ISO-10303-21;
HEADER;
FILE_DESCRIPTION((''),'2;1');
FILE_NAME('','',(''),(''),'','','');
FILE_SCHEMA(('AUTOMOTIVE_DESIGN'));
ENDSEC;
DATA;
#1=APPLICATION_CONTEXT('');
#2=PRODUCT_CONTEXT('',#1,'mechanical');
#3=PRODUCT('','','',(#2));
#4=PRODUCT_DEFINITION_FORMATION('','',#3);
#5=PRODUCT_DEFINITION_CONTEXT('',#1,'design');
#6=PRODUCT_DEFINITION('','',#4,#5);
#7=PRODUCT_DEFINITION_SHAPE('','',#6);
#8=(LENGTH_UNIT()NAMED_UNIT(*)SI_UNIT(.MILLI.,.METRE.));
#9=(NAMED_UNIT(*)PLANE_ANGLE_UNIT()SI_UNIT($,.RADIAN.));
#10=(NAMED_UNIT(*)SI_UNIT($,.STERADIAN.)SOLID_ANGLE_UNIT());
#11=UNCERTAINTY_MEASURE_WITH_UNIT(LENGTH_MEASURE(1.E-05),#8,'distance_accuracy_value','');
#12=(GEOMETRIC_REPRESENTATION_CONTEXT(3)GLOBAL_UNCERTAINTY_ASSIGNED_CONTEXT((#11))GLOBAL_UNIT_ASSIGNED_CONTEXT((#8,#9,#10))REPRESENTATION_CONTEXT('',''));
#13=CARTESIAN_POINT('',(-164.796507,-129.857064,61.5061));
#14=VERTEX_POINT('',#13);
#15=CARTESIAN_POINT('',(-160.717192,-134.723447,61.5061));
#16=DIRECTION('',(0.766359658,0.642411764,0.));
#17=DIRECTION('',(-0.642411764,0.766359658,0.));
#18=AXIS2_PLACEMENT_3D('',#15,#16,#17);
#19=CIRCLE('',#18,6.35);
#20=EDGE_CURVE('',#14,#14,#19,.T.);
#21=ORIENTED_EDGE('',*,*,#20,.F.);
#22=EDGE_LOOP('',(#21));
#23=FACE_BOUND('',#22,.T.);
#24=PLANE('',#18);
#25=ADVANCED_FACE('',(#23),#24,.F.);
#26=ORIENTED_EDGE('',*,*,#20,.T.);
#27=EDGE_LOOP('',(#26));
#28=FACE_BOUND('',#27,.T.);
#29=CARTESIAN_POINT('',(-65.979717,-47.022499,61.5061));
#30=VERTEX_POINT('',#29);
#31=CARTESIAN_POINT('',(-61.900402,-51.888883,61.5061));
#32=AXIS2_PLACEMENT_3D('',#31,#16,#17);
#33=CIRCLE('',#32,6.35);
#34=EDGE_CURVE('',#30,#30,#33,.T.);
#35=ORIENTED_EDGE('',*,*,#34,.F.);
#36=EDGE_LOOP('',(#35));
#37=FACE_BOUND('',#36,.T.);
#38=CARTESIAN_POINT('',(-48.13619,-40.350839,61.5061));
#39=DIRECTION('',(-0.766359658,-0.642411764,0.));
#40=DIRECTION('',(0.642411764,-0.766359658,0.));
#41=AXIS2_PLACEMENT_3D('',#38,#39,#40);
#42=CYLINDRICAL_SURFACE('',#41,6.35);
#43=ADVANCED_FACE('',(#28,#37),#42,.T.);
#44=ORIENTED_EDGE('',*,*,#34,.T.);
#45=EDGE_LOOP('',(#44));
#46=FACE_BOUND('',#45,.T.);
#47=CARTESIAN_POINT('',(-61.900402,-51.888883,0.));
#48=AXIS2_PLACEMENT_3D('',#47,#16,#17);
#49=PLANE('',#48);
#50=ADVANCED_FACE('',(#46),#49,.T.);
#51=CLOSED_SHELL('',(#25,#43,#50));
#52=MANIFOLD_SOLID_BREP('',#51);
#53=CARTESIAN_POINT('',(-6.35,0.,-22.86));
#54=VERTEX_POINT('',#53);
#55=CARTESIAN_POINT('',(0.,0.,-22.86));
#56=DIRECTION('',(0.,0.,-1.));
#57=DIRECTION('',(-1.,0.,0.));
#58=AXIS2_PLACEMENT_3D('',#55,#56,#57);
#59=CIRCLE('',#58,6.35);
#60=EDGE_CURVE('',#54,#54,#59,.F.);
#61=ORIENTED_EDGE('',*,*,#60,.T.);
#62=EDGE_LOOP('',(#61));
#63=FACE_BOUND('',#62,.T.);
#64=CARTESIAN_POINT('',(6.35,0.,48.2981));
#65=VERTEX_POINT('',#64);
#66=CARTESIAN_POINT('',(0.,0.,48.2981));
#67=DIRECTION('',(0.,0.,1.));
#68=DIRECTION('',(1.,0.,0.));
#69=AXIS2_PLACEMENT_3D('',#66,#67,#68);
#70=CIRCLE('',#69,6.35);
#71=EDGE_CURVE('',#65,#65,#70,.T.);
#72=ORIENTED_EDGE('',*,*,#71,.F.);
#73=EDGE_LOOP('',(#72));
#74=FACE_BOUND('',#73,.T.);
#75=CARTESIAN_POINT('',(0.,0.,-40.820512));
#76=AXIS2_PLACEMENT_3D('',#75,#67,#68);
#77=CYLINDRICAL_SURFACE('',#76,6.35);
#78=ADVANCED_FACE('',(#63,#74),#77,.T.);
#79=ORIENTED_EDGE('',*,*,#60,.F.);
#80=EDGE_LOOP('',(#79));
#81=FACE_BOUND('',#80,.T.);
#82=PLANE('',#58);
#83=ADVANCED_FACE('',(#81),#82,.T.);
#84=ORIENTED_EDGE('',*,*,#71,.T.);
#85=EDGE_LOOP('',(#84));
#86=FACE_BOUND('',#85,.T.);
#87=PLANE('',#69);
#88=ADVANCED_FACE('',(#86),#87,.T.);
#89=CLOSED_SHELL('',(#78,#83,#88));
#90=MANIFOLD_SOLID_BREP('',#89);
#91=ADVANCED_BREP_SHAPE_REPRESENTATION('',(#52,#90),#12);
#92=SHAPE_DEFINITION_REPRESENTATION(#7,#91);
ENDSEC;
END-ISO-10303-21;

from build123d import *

# Parameters (mm, degrees)
BOSS_EXTRUDE1_OUTLINE_R = 6.35
BOSS_EXTRUDE1_DEPTH     = 128.9431
SKETCH3_R               = 6.35
BOSS_EXTRUDE2_DEPTH     = 71.1581


# Read off the part's stored shape, not the designer's step: Boss-Extrude1
with BuildPart() as part:
    # Boss-Extrude1 outline → Boss-Extrude1 (new body)
    with BuildSketch(Plane(origin=(-160.717192238, -134.723447429, 0), x_dir=(0, 0, -1), z_dir=(0.7663596576395588, 0.6424117644802112, 0))):
        with Locations((-61.5061, 0)):
            Circle(BOSS_EXTRUDE1_OUTLINE_R)
    extrude(amount=BOSS_EXTRUDE1_DEPTH)


with BuildPart() as body_2:
    # Sketch3 → Boss-Extrude2 (new body)
    with BuildSketch(Plane.XY.offset(48.2981)):
        Circle(SKETCH3_R)
    extrude(amount=-BOSS_EXTRUDE2_DEPTH)


solid = Compound([part.part, body_2.part])
